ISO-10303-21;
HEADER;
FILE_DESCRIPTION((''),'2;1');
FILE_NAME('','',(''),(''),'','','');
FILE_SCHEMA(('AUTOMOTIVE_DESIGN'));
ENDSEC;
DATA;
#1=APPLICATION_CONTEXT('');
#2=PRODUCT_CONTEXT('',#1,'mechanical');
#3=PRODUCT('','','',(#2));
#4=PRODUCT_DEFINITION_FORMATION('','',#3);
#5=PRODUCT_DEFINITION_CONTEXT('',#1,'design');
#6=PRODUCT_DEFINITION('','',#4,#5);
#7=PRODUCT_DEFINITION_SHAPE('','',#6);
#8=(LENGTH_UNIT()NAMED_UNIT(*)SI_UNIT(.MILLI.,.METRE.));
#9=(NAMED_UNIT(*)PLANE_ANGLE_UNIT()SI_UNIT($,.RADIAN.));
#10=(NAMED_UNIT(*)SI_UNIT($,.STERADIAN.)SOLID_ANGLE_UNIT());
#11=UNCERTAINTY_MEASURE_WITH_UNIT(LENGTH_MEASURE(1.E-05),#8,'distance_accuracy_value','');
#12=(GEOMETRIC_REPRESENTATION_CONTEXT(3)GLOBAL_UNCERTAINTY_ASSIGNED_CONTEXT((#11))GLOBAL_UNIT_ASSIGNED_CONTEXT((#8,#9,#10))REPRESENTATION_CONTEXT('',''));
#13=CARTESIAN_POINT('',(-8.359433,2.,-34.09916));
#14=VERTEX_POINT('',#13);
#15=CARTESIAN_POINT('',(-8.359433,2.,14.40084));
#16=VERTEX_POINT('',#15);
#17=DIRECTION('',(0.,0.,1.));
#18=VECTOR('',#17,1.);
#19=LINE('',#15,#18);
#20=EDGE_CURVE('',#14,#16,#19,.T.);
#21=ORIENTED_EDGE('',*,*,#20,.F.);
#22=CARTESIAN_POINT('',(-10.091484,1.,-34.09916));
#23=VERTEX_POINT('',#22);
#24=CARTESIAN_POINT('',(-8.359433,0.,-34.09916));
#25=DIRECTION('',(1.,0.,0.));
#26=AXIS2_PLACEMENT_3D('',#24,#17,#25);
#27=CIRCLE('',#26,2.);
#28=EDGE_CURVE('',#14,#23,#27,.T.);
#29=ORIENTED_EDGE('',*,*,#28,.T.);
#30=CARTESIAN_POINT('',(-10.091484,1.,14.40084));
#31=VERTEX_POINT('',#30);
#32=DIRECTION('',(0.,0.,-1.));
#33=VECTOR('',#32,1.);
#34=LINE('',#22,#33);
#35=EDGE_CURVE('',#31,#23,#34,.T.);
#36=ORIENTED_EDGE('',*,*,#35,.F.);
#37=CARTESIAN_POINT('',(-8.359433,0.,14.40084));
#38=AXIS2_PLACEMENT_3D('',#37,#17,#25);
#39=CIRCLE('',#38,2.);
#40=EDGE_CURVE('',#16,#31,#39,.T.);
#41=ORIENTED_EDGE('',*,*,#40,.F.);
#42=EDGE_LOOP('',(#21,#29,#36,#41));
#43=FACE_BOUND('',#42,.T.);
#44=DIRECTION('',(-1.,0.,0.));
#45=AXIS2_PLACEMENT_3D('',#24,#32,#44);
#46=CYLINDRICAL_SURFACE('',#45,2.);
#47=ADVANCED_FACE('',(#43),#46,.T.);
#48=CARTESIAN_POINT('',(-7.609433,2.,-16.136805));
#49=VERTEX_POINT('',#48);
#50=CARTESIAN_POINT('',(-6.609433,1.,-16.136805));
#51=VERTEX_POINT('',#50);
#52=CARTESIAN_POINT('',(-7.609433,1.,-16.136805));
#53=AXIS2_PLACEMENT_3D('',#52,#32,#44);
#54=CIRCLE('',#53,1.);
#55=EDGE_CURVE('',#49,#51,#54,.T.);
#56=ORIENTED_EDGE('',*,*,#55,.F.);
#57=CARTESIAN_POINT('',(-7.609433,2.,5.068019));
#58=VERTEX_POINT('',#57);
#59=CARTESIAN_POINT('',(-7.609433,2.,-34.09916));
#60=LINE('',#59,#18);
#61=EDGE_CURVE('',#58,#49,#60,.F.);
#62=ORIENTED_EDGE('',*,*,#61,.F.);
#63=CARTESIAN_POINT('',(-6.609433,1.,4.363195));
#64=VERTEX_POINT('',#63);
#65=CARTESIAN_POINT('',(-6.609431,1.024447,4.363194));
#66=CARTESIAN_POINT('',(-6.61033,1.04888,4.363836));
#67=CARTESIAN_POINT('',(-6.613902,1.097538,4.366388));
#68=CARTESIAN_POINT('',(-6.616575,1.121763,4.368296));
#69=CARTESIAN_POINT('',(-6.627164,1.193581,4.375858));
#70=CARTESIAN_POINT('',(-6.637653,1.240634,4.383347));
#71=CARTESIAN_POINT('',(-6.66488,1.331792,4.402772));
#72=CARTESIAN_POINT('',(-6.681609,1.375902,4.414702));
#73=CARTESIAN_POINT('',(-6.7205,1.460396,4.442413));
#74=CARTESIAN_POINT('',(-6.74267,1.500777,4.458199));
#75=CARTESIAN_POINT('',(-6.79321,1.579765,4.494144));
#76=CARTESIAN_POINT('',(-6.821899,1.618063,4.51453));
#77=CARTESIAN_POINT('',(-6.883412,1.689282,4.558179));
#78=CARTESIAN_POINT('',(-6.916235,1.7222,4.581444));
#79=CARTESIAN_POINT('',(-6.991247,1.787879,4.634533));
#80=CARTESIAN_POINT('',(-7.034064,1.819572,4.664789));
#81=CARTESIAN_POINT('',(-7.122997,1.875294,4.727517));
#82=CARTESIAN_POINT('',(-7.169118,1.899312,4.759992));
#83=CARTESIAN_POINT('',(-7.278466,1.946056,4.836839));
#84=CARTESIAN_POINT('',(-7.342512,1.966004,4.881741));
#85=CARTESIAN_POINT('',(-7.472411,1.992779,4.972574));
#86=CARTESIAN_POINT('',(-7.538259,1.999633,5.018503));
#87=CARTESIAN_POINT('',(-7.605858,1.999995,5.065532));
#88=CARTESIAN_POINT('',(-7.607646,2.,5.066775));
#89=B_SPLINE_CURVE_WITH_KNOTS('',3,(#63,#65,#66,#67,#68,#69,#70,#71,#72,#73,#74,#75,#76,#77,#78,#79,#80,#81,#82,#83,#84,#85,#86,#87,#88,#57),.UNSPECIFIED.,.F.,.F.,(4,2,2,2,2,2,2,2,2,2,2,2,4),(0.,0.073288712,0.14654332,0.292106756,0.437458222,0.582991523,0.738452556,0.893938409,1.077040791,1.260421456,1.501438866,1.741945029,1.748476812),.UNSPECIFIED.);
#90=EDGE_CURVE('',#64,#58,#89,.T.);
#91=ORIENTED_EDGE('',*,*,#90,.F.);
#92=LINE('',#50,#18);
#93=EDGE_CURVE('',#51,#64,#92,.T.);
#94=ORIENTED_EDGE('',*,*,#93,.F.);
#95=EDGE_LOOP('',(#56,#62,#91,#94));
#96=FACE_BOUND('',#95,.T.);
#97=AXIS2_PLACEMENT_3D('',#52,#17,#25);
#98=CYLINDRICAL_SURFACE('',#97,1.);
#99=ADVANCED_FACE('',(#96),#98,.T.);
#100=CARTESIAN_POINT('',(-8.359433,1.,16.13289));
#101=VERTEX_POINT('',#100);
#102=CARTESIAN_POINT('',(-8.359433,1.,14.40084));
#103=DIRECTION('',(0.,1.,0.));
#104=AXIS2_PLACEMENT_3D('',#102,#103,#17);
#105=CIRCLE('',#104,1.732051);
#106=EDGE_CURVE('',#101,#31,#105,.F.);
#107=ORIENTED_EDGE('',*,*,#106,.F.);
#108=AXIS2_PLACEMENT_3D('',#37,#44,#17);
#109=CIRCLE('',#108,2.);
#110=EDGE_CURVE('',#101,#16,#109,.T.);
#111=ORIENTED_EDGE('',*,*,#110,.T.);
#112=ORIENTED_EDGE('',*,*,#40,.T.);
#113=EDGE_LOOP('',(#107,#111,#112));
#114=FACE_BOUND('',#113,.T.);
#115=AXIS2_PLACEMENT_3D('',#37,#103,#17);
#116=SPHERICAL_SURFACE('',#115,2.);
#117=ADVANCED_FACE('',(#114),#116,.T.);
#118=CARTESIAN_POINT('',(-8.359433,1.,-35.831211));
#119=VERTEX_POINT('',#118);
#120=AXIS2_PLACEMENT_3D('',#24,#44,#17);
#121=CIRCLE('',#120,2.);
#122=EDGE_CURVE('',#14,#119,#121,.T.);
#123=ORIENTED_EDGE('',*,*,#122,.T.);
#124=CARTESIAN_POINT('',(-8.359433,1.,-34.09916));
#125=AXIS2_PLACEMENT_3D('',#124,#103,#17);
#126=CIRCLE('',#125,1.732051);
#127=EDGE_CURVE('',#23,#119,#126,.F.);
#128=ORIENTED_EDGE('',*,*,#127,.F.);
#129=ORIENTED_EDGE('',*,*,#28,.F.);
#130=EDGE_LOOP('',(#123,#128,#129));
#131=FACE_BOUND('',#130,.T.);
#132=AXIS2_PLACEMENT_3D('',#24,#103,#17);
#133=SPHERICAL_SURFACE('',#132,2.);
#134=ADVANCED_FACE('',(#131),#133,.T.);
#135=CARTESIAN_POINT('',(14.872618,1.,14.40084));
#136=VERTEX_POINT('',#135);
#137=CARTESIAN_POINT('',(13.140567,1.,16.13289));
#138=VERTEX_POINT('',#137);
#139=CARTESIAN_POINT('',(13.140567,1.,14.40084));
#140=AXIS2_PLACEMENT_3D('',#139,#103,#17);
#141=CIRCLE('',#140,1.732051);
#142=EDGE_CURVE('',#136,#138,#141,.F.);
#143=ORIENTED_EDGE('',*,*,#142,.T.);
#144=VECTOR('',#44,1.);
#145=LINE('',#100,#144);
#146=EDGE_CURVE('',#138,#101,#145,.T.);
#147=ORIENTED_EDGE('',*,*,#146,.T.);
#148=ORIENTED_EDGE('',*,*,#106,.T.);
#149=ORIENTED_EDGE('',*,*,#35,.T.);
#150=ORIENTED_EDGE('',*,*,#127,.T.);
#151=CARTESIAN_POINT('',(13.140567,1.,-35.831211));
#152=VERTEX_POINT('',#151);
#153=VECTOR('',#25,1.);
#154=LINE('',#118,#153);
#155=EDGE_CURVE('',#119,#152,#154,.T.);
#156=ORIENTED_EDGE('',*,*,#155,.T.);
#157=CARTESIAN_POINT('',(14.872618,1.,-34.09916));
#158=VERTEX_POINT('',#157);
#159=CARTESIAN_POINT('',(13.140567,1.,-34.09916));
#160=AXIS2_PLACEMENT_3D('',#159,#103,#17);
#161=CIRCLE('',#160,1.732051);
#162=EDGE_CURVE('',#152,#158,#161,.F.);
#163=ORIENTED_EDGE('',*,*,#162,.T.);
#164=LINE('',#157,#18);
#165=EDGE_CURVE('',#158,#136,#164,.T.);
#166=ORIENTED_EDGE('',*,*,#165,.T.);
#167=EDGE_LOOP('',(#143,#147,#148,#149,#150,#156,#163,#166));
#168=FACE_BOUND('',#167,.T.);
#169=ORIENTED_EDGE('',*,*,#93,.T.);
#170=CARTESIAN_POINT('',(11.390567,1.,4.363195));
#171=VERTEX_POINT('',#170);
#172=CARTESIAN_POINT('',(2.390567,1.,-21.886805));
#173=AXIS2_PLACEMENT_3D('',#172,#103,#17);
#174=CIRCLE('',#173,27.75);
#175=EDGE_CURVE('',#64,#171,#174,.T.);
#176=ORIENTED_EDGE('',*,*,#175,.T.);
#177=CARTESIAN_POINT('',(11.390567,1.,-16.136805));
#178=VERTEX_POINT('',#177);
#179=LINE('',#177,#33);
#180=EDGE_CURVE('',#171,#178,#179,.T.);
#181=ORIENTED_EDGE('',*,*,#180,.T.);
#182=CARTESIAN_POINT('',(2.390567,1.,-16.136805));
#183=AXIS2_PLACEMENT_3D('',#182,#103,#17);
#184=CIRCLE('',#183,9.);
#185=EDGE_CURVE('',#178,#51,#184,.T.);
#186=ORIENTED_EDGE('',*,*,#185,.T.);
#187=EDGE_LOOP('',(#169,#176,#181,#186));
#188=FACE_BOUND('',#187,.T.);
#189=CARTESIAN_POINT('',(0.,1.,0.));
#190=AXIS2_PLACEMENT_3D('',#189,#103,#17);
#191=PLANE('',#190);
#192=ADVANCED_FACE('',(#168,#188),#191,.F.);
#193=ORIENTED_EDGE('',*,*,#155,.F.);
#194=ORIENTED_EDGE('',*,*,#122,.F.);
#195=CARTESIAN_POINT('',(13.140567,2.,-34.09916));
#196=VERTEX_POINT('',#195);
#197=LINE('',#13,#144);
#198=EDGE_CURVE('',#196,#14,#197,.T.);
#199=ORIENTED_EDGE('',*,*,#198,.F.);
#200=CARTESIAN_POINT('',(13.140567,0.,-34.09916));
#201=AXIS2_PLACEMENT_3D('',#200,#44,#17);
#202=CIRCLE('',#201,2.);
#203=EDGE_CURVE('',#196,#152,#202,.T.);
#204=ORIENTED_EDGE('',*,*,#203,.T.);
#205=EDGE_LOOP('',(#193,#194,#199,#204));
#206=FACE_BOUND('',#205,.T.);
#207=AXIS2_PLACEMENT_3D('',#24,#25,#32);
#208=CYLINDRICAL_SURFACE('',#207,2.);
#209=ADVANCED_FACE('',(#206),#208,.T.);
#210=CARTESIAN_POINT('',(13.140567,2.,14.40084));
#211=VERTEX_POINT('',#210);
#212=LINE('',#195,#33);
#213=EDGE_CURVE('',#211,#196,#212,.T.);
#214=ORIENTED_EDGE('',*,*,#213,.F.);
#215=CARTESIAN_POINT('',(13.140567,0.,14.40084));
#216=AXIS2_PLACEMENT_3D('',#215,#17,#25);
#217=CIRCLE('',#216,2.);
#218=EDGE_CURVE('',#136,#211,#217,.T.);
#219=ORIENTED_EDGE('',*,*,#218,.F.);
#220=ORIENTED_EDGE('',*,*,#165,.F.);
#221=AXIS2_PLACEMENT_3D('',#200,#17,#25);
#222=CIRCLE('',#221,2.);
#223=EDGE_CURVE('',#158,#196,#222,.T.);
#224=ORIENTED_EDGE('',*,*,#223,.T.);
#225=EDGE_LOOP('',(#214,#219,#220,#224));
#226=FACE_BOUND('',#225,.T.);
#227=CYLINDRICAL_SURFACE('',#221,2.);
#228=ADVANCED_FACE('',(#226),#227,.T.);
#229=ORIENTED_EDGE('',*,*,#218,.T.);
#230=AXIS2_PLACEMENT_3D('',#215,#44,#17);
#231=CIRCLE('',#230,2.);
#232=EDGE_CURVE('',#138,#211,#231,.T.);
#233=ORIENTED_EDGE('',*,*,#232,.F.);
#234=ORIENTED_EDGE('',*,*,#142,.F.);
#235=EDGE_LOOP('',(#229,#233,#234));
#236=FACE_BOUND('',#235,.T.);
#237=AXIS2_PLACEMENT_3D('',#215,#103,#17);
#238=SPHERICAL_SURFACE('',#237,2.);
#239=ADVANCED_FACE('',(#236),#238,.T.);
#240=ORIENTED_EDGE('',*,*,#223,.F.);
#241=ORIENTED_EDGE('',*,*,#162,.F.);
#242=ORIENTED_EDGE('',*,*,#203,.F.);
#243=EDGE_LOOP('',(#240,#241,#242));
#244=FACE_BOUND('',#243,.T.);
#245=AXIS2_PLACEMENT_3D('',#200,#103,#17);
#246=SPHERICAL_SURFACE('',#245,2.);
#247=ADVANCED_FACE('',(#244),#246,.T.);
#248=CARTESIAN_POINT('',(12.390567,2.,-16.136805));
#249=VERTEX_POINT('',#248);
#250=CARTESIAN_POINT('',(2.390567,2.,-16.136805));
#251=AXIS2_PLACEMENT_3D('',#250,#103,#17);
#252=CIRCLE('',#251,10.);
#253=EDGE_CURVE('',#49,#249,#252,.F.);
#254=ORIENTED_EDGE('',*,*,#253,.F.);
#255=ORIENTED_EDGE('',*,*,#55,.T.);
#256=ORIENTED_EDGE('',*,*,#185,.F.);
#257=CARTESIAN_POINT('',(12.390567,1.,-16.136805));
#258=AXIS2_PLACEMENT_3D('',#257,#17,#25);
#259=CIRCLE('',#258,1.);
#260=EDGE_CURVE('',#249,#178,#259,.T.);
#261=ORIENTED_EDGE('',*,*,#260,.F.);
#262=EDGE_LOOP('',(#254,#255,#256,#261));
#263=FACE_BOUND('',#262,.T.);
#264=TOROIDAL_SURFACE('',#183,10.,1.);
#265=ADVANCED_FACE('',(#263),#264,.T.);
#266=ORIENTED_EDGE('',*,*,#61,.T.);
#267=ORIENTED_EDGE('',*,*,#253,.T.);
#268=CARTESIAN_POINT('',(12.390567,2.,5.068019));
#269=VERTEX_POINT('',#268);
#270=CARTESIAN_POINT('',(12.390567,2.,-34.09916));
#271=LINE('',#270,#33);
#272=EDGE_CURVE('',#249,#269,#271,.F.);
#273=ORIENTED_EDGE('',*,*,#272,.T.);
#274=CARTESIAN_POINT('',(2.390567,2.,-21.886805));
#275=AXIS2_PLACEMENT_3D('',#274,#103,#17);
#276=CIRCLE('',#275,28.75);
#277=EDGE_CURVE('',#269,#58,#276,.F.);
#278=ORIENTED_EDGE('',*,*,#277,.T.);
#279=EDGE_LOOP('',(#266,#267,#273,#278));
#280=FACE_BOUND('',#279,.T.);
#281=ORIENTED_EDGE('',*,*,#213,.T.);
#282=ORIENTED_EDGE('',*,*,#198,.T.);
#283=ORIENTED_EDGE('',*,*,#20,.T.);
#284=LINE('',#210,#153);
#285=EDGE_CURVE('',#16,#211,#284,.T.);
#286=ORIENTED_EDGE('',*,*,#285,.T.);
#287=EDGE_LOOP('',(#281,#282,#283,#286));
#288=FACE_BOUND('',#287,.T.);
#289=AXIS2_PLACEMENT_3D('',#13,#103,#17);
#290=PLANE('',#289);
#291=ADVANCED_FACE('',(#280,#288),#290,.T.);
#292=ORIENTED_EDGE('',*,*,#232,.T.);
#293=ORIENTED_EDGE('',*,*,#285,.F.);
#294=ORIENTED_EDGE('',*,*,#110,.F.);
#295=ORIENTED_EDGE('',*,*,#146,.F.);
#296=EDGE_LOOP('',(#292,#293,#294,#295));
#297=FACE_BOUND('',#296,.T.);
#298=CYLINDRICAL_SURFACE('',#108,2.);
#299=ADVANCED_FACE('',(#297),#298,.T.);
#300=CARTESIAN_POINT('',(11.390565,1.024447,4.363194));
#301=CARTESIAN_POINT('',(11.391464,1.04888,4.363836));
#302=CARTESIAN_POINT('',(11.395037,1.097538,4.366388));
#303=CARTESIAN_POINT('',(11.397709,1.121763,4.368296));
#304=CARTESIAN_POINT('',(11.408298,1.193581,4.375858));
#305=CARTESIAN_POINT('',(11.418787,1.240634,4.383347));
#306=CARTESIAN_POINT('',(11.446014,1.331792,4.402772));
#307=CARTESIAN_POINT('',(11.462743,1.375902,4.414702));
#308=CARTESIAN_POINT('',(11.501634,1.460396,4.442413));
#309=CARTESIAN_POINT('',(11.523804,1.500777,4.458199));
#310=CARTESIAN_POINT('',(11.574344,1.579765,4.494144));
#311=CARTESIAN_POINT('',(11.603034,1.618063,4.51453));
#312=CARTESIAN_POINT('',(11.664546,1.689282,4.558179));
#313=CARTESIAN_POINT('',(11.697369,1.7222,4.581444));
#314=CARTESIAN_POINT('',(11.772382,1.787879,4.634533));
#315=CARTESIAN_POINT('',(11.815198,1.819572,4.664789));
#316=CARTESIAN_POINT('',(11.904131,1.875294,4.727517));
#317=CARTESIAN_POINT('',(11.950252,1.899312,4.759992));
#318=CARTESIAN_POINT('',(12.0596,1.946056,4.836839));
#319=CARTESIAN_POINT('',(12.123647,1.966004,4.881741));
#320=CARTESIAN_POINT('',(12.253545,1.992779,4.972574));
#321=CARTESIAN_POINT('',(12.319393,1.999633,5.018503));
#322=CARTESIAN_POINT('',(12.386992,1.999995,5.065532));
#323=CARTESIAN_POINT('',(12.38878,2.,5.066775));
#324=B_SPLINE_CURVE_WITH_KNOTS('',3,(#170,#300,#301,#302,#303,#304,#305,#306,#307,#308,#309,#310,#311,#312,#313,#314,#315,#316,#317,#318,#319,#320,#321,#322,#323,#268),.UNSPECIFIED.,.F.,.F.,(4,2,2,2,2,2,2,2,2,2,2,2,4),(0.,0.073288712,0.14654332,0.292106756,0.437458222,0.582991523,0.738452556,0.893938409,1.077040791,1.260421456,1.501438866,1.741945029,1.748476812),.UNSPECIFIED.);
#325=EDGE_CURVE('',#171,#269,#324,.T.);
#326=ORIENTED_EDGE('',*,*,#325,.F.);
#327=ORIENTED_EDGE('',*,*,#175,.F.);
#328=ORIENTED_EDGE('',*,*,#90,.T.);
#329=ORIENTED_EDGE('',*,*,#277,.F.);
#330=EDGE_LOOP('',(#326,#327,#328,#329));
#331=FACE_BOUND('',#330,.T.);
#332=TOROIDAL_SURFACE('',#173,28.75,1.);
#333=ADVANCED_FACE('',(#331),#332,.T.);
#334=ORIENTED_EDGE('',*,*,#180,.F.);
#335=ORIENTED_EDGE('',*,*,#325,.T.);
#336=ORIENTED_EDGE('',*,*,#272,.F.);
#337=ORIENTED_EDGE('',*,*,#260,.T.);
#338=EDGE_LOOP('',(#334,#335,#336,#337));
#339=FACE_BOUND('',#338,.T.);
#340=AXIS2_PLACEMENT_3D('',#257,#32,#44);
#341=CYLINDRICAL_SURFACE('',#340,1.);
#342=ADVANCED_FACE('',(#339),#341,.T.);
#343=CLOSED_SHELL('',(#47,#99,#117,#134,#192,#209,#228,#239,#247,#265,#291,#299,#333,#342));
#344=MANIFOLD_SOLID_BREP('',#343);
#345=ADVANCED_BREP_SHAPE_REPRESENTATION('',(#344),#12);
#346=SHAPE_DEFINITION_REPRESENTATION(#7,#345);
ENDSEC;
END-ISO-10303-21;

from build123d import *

# Parameters (mm, degrees)
EXTRUDE_1_DEPTH     = 2
FILLET_1_R          = 2
SKETCH_2_W          = 35.782546262
SKETCH_2_H          = 59.110257758
CUT_EXTRUDE_1_DEPTH = 1
FILLET_2_R          = 1


with BuildPart() as part:
    # 草图1 → 凸台-拉伸1 (new body)
    with BuildSketch(Plane(origin=(0, 0, 0), x_dir=(1, 0, 0), z_dir=(0, 1, 0))):
        with BuildLine():
            Line((-8.359432933, 36.099160402), (13.140567067, 36.099160402))
            ThreePointArc((13.140567067, 36.099160402), (14.554780629, 35.513373964), (15.140567067, 34.099160402))
            Line((15.140567067, 34.099160402), (15.140567067, -14.400839598))
            ThreePointArc((15.140567067, -14.400839598), (14.554780629, -15.81505316), (13.140567067, -16.400839598))
            Line((13.140567067, -16.400839598), (-8.359432933, -16.400839598))
            ThreePointArc((-8.359432933, -16.400839598), (-9.773646496, -15.81505316), (-10.359432933, -14.400839598))
            Line((-10.359432933, -14.400839598), (-10.359432933, 34.099160402))
            ThreePointArc((-10.359432933, 34.099160402), (-9.773646496, 35.513373964), (-8.359432933, 36.099160402))
        make_face()
        with BuildLine():
            Line((-6.609432933, 16.136804798), (-6.609432933, -4.363195202))
            ThreePointArc((-6.609432933, -4.363195202), (2.390567067, -5.863195202), (11.390567067, -4.363195202))
            Line((11.390567067, -4.363195202), (11.390567067, 16.136804798))
            ThreePointArc((11.390567067, 16.136804798), (8.754528097, 22.500765829), (2.390567067, 25.136804798))
            ThreePointArc((2.390567067, 25.136804798), (-3.973393964, 22.500765829), (-6.609432933, 16.136804798))
        make_face(mode=Mode.SUBTRACT)
    extrude(amount=EXTRUDE_1_DEPTH)

    # 圆角1
    fillet_1_edges = [part.edges().sort_by_distance(p)[0] for p in [
        (-9.773646496, 2, 15.81505316),
        (2.390567067, 2, 16.400839598),
        (14.554780629, 2, 15.81505316),
        (15.140567067, 2, -9.849160402),
        (-9.773646496, 2, -35.513373964),
        (14.554780629, 2, -35.513373964),
        (2.390567067, 2, -36.099160402),
        (-10.359432933, 2, -9.849160402),
    ]]
    fillet(fillet_1_edges, radius=FILLET_1_R - 0.0001)  # a hair under: the kernel refuses the full size

    # 草图2 → 切除-拉伸1 (cut)
    with BuildSketch(Plane(origin=(0, 0, 0), x_dir=(-1, 0, 0), z_dir=(0, -1, 0))):
        with Locations((0.496790494, 10.685635763)):
            Rectangle(SKETCH_2_W, SKETCH_2_H)
    extrude(amount=-CUT_EXTRUDE_1_DEPTH, mode=Mode.SUBTRACT)

    # 圆角2
    fillet_2_edges = [part.edges().sort_by_distance(p)[0] for p in [
        (11.390567067, 2, -5.886804798),
        (2.390567067, 2, -25.136804798),
        (-6.609432933, 2, -5.886804798),
        (2.390567067, 2, 5.863195202),
    ]]
    fillet(fillet_2_edges, radius=FILLET_2_R - 0.0001)  # a hair under: the kernel refuses the full size


solid = part.part
